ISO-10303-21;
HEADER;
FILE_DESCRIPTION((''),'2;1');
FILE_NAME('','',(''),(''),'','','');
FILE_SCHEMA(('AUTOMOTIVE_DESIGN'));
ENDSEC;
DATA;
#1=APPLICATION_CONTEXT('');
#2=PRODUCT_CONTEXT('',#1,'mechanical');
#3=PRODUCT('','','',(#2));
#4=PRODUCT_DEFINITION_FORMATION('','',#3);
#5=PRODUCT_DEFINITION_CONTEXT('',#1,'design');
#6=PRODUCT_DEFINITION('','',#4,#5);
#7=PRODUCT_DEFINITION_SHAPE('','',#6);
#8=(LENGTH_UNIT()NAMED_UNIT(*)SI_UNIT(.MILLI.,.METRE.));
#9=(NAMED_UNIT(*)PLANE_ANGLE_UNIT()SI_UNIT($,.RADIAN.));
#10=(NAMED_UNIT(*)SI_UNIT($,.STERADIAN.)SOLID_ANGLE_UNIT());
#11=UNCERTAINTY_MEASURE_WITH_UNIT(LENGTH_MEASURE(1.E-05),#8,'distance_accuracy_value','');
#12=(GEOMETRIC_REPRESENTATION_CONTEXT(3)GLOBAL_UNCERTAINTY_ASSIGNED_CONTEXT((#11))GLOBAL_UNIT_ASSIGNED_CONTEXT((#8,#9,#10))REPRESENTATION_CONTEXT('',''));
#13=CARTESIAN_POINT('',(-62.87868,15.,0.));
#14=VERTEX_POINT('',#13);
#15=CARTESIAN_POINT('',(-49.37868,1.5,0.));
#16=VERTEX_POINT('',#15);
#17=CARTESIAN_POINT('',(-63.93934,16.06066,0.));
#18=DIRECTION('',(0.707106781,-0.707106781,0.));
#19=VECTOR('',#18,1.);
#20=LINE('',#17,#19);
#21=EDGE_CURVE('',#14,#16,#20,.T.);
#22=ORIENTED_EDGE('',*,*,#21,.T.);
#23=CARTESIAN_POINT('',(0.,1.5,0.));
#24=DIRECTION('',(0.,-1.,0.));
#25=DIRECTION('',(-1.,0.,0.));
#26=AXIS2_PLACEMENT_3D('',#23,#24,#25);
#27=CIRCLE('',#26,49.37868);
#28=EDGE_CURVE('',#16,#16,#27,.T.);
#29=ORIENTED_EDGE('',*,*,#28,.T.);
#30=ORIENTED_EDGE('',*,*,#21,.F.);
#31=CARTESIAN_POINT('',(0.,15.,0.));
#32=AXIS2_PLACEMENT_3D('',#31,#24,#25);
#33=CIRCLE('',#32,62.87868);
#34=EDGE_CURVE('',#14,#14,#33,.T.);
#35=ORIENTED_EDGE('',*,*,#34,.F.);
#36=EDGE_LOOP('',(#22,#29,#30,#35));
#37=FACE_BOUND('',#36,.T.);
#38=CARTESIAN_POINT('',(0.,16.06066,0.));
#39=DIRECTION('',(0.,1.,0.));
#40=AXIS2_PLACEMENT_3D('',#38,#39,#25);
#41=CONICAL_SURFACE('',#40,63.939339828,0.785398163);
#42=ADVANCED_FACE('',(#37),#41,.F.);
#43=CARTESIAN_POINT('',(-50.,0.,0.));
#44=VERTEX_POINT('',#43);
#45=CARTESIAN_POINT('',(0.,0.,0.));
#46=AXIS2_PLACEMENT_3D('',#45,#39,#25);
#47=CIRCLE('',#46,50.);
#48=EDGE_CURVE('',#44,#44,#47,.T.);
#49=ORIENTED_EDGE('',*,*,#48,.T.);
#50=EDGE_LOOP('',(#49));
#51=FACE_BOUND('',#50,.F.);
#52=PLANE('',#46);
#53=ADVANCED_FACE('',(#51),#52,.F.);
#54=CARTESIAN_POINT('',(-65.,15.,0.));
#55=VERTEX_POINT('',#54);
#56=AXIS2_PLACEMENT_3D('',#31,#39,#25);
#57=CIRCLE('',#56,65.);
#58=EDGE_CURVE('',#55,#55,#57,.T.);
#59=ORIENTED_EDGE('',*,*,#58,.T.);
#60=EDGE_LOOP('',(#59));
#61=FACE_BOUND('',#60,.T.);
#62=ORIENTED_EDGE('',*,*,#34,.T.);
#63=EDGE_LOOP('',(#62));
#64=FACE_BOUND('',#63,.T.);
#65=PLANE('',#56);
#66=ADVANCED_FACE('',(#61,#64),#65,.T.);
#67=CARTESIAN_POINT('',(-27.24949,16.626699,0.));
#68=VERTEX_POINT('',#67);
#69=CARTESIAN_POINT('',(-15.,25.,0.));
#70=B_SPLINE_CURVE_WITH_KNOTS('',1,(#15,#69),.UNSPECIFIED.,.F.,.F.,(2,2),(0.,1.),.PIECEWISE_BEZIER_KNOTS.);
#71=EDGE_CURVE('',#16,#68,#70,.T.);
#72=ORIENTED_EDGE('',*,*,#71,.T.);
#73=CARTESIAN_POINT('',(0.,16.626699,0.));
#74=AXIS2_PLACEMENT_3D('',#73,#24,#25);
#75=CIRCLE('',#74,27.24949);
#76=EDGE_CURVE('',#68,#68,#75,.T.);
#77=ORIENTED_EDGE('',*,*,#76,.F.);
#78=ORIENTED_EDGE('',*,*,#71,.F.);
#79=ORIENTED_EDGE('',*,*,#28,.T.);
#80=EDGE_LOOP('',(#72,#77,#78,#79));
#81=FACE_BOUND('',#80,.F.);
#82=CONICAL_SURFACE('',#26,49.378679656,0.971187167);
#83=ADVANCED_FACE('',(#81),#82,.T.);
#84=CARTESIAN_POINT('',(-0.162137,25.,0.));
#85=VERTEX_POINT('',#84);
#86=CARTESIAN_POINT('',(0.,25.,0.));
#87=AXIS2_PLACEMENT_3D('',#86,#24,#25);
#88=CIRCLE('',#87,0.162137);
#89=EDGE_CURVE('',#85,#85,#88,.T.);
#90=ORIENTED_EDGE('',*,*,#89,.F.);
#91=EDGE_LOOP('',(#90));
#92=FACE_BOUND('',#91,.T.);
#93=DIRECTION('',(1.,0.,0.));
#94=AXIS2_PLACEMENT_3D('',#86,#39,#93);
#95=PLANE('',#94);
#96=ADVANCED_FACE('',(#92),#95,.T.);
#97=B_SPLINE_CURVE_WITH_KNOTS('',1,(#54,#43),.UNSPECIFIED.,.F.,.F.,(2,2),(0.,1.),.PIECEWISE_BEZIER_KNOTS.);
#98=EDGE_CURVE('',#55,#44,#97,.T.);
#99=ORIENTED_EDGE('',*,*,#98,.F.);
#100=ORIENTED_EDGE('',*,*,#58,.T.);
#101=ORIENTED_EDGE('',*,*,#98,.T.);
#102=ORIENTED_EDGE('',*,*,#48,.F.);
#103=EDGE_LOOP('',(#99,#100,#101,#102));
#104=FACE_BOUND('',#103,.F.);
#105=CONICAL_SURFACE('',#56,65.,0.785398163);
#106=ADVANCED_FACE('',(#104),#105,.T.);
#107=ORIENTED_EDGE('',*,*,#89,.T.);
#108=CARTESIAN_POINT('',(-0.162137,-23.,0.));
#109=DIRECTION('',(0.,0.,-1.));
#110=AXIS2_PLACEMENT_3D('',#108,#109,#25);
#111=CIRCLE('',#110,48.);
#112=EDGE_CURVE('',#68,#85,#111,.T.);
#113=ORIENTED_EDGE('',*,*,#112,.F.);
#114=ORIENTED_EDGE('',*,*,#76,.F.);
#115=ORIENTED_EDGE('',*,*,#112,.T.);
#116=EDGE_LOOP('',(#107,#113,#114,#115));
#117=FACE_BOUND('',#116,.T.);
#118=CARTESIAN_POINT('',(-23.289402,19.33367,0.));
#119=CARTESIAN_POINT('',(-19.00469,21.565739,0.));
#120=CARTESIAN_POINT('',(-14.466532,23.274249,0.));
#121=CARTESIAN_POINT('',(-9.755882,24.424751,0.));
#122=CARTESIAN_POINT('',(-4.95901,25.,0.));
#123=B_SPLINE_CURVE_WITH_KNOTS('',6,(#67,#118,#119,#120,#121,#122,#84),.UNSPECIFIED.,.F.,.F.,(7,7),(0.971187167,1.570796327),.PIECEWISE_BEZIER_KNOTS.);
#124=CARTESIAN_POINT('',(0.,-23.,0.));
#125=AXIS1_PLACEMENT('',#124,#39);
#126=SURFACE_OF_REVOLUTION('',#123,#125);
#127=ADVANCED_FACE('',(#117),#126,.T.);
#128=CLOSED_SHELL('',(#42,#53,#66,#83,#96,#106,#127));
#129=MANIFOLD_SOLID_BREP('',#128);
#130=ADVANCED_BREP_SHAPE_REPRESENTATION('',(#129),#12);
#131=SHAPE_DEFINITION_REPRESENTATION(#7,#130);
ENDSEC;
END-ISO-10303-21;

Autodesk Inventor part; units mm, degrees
ref_plane "YZ Plane" through (0, 0, 0) normal (1, 0, 0) x (0, 1, 0)
sketch "Sketch1" plane through (0, 0, 0) normal (0, 1, 0) x (-1, 0, 0)
  circle A0 centre (0, 0) radius 50
  dimension "d0" = 100
ref_plane "Work Plane1" through (0, 15, 0) normal (0, 1, 0) x (-1, 0, 0)
sketch "Sketch2" plane through (0, 15, 0) normal (0, 1, 0) x (-1, 0, 0)
  circle A0 centre (0, 0) radius 65
  dimension "d2" = 130
loft "Loft1" add profiles "Sketch2", "Sketch1"
shell "Shell1" thickness 1.5 removed faces 1 at (7.4104, 15, 20.36)
ref_plane "Work Plane2" through (0, 25, 0) normal (0, 1, 0) x (1, 0, 0)
sketch "Sketch3" plane through (0, 25, 0) normal (0, 1, 0) x (1, 0, 0)
  circle A0 centre (0, 0) radius 15
  dimension "d9" = 30
loft "Loft2" add profiles "Sketch3" section 1 edges at (49.3787, 1.5, 0)
fillet "Fillet1" radius 48 1 edges at (15, 25, 0)
properties part number "Wadah"
